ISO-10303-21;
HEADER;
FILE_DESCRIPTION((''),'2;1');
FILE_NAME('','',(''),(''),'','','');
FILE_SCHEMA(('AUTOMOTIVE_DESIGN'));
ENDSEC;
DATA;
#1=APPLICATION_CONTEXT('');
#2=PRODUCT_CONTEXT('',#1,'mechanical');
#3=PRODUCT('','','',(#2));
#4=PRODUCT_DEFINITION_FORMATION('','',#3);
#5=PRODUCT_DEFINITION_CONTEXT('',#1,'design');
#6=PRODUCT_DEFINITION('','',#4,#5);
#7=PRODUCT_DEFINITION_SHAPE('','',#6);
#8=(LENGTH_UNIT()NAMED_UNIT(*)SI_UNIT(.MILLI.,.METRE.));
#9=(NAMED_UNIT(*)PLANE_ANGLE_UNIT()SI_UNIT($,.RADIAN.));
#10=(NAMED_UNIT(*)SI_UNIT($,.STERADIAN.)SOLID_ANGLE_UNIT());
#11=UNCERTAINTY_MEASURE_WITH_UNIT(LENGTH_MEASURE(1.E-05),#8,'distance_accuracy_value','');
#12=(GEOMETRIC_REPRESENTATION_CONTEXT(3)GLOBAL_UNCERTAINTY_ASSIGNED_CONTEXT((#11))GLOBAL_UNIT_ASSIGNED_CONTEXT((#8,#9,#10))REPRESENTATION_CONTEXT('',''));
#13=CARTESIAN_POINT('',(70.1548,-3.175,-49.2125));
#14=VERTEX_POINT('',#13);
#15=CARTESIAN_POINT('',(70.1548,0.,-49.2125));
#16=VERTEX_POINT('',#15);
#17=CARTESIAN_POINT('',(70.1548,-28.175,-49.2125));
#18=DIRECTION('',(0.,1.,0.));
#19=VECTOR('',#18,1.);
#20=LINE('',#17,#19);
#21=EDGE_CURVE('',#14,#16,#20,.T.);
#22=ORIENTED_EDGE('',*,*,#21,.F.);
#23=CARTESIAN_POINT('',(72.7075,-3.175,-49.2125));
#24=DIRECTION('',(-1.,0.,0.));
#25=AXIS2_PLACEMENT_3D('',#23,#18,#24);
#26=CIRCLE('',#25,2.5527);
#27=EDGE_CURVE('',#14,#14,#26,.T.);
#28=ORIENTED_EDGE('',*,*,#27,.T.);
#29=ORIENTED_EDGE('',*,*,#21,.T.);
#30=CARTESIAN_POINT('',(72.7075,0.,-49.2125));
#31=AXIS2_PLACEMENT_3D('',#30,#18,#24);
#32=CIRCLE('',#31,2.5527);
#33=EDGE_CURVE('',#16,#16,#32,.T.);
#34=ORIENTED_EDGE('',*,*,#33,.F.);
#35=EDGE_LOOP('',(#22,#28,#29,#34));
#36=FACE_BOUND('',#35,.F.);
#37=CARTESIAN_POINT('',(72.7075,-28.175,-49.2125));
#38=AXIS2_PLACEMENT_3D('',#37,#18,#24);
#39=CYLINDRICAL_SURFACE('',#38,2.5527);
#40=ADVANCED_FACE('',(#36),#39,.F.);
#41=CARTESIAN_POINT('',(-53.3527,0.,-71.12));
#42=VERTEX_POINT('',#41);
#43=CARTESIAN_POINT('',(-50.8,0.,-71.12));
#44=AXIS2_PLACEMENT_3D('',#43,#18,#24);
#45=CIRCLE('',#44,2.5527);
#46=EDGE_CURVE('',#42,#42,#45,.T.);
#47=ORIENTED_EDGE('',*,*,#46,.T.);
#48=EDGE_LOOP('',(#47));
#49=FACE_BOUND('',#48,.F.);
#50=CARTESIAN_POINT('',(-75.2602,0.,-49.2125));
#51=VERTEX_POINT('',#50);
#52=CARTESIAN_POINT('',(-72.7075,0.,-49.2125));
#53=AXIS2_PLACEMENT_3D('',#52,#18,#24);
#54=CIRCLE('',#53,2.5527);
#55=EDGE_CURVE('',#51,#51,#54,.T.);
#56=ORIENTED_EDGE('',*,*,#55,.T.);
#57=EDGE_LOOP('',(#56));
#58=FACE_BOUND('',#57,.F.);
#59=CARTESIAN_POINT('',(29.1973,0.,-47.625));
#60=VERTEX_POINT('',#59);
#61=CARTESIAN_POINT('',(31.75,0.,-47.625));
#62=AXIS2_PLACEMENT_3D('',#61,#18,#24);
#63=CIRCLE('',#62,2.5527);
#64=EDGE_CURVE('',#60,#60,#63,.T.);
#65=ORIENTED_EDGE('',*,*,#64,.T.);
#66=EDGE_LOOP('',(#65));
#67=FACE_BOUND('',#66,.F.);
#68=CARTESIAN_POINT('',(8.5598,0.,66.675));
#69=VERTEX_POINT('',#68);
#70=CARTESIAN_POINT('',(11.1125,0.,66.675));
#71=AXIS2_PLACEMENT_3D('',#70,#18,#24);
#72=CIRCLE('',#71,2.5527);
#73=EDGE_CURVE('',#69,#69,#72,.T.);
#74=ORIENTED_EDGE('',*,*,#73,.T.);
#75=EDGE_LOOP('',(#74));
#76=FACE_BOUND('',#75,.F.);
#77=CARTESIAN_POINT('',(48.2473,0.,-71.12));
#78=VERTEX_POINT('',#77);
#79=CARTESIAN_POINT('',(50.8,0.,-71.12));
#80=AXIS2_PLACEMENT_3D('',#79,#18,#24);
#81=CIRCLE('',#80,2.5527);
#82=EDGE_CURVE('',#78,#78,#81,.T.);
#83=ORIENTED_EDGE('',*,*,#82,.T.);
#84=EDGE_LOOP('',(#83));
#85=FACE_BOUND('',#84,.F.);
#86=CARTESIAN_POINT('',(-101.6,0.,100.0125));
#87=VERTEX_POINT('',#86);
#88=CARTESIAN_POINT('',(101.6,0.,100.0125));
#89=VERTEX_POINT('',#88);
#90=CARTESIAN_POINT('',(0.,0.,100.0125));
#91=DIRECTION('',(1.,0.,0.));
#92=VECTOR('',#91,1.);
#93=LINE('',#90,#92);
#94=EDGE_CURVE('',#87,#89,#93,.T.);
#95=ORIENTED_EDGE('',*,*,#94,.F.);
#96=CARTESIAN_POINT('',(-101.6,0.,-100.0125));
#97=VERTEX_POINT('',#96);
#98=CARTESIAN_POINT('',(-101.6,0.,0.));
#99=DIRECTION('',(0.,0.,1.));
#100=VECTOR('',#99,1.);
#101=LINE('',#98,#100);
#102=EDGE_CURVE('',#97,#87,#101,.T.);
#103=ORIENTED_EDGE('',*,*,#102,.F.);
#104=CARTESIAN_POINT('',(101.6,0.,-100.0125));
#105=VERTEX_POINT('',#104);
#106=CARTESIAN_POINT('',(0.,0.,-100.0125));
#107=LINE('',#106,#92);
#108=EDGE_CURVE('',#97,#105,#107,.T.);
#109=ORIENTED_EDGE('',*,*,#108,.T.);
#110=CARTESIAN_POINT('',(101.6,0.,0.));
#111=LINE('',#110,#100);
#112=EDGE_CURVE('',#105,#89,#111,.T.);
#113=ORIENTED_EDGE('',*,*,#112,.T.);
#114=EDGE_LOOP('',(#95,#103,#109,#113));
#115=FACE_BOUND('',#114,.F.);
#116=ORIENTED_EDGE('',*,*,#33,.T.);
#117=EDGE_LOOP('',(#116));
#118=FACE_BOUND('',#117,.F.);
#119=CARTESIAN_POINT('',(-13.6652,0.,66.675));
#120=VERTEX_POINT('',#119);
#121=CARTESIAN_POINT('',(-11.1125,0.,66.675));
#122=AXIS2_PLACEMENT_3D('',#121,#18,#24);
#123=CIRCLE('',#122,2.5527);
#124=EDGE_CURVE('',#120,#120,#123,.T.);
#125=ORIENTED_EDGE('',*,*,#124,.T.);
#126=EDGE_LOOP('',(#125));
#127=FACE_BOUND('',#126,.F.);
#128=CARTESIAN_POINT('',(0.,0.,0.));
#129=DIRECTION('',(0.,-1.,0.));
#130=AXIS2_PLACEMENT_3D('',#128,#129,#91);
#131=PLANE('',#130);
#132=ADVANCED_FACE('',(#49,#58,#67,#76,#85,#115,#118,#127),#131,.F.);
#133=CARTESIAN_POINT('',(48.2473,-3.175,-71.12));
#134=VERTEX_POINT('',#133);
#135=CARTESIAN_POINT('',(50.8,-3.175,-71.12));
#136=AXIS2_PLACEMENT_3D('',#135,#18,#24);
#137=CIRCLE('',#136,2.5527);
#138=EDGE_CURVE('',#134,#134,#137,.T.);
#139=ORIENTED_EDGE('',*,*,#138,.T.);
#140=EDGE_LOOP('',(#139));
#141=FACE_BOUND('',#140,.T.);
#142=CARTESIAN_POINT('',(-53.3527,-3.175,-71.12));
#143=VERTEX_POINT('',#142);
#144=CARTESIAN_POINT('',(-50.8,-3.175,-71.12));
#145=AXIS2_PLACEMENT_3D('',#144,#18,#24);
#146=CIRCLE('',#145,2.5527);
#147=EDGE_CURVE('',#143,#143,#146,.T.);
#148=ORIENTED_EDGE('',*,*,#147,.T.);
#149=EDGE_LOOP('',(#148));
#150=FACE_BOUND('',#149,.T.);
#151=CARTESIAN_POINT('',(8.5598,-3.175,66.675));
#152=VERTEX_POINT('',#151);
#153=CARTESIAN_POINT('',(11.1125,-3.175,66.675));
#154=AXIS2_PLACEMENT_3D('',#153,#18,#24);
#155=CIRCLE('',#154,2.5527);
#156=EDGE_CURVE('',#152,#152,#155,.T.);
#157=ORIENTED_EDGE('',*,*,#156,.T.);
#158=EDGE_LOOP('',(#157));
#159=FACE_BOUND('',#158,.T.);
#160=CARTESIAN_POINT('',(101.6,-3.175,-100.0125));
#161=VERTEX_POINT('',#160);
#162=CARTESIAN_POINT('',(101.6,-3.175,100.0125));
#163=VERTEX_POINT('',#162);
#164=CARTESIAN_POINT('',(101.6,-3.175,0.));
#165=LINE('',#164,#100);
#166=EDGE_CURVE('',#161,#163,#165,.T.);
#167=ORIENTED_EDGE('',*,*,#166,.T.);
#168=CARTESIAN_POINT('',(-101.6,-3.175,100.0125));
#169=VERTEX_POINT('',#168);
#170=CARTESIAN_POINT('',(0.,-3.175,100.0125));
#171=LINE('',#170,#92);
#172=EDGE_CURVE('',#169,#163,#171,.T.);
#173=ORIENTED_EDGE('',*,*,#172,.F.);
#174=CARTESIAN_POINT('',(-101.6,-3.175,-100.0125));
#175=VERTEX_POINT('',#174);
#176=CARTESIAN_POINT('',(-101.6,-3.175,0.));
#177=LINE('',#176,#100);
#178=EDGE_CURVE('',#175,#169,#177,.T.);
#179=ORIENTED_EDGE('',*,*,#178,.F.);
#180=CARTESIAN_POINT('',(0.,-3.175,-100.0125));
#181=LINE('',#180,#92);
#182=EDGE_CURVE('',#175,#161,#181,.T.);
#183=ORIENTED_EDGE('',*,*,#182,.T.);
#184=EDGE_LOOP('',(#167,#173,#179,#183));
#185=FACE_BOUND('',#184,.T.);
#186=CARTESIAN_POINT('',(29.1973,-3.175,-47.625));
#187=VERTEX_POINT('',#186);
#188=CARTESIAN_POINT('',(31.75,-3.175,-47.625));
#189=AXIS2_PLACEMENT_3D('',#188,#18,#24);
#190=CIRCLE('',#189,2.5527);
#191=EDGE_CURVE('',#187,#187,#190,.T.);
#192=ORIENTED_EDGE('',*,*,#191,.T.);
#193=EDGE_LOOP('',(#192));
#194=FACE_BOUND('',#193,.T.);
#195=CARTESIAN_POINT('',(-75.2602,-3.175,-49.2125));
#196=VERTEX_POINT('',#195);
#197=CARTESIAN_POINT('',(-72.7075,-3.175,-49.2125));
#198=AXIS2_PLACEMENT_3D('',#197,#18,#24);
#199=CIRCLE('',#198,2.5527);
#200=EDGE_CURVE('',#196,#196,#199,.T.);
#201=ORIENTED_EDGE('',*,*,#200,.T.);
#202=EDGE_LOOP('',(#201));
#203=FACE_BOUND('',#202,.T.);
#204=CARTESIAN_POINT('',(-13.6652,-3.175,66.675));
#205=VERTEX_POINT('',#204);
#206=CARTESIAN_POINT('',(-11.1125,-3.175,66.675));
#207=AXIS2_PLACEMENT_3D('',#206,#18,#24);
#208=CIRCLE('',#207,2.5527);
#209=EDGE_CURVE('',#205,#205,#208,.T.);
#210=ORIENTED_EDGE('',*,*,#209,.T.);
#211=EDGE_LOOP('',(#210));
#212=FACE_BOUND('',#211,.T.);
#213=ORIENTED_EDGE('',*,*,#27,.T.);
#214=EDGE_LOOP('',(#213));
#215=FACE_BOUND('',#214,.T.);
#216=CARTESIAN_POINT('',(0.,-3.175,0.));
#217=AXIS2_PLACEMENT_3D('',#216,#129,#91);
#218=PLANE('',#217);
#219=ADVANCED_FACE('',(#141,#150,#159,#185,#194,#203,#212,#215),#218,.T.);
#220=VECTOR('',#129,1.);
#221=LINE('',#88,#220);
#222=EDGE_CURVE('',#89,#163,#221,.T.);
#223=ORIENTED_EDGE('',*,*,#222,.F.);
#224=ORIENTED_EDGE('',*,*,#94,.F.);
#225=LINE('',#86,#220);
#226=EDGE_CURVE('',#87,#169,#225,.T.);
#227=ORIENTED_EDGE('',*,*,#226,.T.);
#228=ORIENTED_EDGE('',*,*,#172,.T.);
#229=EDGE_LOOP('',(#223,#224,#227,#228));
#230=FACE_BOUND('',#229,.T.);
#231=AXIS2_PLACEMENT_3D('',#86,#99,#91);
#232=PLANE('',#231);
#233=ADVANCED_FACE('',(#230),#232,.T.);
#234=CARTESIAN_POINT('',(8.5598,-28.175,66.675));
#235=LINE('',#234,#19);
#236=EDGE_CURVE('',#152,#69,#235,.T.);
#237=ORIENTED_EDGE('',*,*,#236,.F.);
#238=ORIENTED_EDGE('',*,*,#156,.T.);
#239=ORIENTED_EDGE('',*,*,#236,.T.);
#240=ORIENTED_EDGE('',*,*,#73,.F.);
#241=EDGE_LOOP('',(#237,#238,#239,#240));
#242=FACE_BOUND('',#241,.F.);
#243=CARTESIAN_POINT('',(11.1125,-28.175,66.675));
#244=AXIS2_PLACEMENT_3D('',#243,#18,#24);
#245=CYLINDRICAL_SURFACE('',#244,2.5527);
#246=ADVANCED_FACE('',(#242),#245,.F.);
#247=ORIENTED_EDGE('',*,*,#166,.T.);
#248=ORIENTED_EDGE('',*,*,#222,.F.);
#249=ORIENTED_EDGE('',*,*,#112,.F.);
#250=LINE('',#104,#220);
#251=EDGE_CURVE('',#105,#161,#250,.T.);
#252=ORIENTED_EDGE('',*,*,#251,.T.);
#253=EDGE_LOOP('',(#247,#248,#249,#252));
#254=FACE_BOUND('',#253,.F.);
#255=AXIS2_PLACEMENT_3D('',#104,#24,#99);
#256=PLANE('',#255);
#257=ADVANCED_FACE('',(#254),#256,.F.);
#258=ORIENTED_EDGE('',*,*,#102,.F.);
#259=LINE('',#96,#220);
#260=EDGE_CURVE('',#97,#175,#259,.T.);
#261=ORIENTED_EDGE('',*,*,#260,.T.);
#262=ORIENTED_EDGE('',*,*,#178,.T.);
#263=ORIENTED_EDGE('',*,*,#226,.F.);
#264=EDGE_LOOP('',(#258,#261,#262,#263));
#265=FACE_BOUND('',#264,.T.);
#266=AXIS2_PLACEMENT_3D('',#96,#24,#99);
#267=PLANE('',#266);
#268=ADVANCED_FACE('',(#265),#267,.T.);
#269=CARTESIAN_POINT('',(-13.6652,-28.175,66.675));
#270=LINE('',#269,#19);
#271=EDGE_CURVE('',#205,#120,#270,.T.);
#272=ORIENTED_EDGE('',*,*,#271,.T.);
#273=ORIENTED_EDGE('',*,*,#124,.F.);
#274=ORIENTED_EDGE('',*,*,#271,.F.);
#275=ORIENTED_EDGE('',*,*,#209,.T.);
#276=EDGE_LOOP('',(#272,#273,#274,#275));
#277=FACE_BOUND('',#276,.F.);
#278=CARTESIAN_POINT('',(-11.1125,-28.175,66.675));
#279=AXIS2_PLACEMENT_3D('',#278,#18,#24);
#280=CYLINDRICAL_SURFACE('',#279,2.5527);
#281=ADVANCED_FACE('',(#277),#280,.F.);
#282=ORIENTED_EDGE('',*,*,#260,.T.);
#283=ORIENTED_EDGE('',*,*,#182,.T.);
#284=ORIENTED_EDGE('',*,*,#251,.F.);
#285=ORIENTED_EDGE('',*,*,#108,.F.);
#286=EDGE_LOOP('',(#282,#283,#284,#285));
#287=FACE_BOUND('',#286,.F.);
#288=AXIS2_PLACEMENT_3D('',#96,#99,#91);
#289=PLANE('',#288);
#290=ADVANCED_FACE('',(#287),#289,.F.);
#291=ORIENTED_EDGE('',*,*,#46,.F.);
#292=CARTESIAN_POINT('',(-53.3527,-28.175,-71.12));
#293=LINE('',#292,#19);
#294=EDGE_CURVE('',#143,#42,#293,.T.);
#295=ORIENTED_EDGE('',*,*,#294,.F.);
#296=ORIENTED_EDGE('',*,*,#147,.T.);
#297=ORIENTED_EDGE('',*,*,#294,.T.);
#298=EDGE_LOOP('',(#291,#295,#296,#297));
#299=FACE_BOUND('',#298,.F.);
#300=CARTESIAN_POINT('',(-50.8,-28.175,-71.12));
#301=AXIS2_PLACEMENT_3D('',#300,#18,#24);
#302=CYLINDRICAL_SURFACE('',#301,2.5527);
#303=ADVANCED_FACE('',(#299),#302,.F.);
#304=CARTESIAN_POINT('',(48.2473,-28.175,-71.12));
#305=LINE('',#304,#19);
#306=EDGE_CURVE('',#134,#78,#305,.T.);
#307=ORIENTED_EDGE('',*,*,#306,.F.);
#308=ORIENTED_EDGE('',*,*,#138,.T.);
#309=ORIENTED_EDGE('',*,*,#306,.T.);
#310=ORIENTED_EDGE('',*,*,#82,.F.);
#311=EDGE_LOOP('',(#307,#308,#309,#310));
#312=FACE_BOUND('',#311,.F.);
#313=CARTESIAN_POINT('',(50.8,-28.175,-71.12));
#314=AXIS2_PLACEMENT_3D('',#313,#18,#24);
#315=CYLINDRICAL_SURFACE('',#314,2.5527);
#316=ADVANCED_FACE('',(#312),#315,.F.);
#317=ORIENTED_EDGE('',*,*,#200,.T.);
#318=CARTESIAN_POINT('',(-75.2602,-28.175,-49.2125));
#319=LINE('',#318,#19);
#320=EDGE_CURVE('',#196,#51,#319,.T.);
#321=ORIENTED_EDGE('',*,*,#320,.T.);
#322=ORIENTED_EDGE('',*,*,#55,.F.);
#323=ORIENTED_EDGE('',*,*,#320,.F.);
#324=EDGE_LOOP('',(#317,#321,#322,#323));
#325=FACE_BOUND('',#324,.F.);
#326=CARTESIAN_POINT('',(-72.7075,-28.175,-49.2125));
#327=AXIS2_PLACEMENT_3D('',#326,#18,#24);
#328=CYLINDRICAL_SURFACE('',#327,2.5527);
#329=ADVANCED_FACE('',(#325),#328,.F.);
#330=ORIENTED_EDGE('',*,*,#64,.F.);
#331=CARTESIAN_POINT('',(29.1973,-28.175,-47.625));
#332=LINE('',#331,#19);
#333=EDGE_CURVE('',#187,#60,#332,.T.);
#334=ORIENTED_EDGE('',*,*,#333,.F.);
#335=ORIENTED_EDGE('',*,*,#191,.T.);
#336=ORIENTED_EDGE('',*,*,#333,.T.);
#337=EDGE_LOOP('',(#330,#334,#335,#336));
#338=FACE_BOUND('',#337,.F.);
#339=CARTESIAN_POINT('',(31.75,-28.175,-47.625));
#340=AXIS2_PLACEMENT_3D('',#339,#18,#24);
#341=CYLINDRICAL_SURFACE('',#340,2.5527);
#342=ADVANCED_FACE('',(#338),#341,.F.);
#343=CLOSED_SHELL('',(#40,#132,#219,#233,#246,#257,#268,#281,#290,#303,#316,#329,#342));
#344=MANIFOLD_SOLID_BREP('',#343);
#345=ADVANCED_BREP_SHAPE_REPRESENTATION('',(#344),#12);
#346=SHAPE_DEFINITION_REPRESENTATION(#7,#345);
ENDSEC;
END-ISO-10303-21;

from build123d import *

# Parameters (mm, degrees)
F0_W     = 203.2
F0_H     = 200.025
F1_DEPTH = 3.175
F3_D     = 5.1054
F3_DEPTH = 25
F3_TIP   = 1.5338169022


# Not quite as in the source:
# - a length typed as a fraction of an inch, garbled in the dataset ("3 / 203.2 mm" for 3/8 in), is restored


with BuildPart() as f1:
    # F0 (on Front) → F1 (new body)
    with BuildSketch(Plane.XZ):
        Rectangle(F0_W, F0_H)
    extrude(amount=F1_DEPTH)

    # F3
    with Locations(Plane.XZ.offset(3.175)):
        with Locations((-72.7075, -49.2125), (72.7075, -49.2125), (-50.8, -71.12), (50.8, -71.12), (31.75, -47.625), (-11.1125, 66.675), (11.1125, 66.675)):
            Hole(F3_D / 2, depth=F3_DEPTH)
            with Locations((0, 0, -(F3_DEPTH + F3_TIP / 2))):  # 118° drill point
                Cone(0, F3_D / 2, F3_TIP, mode=Mode.SUBTRACT)


solid = f1.part
